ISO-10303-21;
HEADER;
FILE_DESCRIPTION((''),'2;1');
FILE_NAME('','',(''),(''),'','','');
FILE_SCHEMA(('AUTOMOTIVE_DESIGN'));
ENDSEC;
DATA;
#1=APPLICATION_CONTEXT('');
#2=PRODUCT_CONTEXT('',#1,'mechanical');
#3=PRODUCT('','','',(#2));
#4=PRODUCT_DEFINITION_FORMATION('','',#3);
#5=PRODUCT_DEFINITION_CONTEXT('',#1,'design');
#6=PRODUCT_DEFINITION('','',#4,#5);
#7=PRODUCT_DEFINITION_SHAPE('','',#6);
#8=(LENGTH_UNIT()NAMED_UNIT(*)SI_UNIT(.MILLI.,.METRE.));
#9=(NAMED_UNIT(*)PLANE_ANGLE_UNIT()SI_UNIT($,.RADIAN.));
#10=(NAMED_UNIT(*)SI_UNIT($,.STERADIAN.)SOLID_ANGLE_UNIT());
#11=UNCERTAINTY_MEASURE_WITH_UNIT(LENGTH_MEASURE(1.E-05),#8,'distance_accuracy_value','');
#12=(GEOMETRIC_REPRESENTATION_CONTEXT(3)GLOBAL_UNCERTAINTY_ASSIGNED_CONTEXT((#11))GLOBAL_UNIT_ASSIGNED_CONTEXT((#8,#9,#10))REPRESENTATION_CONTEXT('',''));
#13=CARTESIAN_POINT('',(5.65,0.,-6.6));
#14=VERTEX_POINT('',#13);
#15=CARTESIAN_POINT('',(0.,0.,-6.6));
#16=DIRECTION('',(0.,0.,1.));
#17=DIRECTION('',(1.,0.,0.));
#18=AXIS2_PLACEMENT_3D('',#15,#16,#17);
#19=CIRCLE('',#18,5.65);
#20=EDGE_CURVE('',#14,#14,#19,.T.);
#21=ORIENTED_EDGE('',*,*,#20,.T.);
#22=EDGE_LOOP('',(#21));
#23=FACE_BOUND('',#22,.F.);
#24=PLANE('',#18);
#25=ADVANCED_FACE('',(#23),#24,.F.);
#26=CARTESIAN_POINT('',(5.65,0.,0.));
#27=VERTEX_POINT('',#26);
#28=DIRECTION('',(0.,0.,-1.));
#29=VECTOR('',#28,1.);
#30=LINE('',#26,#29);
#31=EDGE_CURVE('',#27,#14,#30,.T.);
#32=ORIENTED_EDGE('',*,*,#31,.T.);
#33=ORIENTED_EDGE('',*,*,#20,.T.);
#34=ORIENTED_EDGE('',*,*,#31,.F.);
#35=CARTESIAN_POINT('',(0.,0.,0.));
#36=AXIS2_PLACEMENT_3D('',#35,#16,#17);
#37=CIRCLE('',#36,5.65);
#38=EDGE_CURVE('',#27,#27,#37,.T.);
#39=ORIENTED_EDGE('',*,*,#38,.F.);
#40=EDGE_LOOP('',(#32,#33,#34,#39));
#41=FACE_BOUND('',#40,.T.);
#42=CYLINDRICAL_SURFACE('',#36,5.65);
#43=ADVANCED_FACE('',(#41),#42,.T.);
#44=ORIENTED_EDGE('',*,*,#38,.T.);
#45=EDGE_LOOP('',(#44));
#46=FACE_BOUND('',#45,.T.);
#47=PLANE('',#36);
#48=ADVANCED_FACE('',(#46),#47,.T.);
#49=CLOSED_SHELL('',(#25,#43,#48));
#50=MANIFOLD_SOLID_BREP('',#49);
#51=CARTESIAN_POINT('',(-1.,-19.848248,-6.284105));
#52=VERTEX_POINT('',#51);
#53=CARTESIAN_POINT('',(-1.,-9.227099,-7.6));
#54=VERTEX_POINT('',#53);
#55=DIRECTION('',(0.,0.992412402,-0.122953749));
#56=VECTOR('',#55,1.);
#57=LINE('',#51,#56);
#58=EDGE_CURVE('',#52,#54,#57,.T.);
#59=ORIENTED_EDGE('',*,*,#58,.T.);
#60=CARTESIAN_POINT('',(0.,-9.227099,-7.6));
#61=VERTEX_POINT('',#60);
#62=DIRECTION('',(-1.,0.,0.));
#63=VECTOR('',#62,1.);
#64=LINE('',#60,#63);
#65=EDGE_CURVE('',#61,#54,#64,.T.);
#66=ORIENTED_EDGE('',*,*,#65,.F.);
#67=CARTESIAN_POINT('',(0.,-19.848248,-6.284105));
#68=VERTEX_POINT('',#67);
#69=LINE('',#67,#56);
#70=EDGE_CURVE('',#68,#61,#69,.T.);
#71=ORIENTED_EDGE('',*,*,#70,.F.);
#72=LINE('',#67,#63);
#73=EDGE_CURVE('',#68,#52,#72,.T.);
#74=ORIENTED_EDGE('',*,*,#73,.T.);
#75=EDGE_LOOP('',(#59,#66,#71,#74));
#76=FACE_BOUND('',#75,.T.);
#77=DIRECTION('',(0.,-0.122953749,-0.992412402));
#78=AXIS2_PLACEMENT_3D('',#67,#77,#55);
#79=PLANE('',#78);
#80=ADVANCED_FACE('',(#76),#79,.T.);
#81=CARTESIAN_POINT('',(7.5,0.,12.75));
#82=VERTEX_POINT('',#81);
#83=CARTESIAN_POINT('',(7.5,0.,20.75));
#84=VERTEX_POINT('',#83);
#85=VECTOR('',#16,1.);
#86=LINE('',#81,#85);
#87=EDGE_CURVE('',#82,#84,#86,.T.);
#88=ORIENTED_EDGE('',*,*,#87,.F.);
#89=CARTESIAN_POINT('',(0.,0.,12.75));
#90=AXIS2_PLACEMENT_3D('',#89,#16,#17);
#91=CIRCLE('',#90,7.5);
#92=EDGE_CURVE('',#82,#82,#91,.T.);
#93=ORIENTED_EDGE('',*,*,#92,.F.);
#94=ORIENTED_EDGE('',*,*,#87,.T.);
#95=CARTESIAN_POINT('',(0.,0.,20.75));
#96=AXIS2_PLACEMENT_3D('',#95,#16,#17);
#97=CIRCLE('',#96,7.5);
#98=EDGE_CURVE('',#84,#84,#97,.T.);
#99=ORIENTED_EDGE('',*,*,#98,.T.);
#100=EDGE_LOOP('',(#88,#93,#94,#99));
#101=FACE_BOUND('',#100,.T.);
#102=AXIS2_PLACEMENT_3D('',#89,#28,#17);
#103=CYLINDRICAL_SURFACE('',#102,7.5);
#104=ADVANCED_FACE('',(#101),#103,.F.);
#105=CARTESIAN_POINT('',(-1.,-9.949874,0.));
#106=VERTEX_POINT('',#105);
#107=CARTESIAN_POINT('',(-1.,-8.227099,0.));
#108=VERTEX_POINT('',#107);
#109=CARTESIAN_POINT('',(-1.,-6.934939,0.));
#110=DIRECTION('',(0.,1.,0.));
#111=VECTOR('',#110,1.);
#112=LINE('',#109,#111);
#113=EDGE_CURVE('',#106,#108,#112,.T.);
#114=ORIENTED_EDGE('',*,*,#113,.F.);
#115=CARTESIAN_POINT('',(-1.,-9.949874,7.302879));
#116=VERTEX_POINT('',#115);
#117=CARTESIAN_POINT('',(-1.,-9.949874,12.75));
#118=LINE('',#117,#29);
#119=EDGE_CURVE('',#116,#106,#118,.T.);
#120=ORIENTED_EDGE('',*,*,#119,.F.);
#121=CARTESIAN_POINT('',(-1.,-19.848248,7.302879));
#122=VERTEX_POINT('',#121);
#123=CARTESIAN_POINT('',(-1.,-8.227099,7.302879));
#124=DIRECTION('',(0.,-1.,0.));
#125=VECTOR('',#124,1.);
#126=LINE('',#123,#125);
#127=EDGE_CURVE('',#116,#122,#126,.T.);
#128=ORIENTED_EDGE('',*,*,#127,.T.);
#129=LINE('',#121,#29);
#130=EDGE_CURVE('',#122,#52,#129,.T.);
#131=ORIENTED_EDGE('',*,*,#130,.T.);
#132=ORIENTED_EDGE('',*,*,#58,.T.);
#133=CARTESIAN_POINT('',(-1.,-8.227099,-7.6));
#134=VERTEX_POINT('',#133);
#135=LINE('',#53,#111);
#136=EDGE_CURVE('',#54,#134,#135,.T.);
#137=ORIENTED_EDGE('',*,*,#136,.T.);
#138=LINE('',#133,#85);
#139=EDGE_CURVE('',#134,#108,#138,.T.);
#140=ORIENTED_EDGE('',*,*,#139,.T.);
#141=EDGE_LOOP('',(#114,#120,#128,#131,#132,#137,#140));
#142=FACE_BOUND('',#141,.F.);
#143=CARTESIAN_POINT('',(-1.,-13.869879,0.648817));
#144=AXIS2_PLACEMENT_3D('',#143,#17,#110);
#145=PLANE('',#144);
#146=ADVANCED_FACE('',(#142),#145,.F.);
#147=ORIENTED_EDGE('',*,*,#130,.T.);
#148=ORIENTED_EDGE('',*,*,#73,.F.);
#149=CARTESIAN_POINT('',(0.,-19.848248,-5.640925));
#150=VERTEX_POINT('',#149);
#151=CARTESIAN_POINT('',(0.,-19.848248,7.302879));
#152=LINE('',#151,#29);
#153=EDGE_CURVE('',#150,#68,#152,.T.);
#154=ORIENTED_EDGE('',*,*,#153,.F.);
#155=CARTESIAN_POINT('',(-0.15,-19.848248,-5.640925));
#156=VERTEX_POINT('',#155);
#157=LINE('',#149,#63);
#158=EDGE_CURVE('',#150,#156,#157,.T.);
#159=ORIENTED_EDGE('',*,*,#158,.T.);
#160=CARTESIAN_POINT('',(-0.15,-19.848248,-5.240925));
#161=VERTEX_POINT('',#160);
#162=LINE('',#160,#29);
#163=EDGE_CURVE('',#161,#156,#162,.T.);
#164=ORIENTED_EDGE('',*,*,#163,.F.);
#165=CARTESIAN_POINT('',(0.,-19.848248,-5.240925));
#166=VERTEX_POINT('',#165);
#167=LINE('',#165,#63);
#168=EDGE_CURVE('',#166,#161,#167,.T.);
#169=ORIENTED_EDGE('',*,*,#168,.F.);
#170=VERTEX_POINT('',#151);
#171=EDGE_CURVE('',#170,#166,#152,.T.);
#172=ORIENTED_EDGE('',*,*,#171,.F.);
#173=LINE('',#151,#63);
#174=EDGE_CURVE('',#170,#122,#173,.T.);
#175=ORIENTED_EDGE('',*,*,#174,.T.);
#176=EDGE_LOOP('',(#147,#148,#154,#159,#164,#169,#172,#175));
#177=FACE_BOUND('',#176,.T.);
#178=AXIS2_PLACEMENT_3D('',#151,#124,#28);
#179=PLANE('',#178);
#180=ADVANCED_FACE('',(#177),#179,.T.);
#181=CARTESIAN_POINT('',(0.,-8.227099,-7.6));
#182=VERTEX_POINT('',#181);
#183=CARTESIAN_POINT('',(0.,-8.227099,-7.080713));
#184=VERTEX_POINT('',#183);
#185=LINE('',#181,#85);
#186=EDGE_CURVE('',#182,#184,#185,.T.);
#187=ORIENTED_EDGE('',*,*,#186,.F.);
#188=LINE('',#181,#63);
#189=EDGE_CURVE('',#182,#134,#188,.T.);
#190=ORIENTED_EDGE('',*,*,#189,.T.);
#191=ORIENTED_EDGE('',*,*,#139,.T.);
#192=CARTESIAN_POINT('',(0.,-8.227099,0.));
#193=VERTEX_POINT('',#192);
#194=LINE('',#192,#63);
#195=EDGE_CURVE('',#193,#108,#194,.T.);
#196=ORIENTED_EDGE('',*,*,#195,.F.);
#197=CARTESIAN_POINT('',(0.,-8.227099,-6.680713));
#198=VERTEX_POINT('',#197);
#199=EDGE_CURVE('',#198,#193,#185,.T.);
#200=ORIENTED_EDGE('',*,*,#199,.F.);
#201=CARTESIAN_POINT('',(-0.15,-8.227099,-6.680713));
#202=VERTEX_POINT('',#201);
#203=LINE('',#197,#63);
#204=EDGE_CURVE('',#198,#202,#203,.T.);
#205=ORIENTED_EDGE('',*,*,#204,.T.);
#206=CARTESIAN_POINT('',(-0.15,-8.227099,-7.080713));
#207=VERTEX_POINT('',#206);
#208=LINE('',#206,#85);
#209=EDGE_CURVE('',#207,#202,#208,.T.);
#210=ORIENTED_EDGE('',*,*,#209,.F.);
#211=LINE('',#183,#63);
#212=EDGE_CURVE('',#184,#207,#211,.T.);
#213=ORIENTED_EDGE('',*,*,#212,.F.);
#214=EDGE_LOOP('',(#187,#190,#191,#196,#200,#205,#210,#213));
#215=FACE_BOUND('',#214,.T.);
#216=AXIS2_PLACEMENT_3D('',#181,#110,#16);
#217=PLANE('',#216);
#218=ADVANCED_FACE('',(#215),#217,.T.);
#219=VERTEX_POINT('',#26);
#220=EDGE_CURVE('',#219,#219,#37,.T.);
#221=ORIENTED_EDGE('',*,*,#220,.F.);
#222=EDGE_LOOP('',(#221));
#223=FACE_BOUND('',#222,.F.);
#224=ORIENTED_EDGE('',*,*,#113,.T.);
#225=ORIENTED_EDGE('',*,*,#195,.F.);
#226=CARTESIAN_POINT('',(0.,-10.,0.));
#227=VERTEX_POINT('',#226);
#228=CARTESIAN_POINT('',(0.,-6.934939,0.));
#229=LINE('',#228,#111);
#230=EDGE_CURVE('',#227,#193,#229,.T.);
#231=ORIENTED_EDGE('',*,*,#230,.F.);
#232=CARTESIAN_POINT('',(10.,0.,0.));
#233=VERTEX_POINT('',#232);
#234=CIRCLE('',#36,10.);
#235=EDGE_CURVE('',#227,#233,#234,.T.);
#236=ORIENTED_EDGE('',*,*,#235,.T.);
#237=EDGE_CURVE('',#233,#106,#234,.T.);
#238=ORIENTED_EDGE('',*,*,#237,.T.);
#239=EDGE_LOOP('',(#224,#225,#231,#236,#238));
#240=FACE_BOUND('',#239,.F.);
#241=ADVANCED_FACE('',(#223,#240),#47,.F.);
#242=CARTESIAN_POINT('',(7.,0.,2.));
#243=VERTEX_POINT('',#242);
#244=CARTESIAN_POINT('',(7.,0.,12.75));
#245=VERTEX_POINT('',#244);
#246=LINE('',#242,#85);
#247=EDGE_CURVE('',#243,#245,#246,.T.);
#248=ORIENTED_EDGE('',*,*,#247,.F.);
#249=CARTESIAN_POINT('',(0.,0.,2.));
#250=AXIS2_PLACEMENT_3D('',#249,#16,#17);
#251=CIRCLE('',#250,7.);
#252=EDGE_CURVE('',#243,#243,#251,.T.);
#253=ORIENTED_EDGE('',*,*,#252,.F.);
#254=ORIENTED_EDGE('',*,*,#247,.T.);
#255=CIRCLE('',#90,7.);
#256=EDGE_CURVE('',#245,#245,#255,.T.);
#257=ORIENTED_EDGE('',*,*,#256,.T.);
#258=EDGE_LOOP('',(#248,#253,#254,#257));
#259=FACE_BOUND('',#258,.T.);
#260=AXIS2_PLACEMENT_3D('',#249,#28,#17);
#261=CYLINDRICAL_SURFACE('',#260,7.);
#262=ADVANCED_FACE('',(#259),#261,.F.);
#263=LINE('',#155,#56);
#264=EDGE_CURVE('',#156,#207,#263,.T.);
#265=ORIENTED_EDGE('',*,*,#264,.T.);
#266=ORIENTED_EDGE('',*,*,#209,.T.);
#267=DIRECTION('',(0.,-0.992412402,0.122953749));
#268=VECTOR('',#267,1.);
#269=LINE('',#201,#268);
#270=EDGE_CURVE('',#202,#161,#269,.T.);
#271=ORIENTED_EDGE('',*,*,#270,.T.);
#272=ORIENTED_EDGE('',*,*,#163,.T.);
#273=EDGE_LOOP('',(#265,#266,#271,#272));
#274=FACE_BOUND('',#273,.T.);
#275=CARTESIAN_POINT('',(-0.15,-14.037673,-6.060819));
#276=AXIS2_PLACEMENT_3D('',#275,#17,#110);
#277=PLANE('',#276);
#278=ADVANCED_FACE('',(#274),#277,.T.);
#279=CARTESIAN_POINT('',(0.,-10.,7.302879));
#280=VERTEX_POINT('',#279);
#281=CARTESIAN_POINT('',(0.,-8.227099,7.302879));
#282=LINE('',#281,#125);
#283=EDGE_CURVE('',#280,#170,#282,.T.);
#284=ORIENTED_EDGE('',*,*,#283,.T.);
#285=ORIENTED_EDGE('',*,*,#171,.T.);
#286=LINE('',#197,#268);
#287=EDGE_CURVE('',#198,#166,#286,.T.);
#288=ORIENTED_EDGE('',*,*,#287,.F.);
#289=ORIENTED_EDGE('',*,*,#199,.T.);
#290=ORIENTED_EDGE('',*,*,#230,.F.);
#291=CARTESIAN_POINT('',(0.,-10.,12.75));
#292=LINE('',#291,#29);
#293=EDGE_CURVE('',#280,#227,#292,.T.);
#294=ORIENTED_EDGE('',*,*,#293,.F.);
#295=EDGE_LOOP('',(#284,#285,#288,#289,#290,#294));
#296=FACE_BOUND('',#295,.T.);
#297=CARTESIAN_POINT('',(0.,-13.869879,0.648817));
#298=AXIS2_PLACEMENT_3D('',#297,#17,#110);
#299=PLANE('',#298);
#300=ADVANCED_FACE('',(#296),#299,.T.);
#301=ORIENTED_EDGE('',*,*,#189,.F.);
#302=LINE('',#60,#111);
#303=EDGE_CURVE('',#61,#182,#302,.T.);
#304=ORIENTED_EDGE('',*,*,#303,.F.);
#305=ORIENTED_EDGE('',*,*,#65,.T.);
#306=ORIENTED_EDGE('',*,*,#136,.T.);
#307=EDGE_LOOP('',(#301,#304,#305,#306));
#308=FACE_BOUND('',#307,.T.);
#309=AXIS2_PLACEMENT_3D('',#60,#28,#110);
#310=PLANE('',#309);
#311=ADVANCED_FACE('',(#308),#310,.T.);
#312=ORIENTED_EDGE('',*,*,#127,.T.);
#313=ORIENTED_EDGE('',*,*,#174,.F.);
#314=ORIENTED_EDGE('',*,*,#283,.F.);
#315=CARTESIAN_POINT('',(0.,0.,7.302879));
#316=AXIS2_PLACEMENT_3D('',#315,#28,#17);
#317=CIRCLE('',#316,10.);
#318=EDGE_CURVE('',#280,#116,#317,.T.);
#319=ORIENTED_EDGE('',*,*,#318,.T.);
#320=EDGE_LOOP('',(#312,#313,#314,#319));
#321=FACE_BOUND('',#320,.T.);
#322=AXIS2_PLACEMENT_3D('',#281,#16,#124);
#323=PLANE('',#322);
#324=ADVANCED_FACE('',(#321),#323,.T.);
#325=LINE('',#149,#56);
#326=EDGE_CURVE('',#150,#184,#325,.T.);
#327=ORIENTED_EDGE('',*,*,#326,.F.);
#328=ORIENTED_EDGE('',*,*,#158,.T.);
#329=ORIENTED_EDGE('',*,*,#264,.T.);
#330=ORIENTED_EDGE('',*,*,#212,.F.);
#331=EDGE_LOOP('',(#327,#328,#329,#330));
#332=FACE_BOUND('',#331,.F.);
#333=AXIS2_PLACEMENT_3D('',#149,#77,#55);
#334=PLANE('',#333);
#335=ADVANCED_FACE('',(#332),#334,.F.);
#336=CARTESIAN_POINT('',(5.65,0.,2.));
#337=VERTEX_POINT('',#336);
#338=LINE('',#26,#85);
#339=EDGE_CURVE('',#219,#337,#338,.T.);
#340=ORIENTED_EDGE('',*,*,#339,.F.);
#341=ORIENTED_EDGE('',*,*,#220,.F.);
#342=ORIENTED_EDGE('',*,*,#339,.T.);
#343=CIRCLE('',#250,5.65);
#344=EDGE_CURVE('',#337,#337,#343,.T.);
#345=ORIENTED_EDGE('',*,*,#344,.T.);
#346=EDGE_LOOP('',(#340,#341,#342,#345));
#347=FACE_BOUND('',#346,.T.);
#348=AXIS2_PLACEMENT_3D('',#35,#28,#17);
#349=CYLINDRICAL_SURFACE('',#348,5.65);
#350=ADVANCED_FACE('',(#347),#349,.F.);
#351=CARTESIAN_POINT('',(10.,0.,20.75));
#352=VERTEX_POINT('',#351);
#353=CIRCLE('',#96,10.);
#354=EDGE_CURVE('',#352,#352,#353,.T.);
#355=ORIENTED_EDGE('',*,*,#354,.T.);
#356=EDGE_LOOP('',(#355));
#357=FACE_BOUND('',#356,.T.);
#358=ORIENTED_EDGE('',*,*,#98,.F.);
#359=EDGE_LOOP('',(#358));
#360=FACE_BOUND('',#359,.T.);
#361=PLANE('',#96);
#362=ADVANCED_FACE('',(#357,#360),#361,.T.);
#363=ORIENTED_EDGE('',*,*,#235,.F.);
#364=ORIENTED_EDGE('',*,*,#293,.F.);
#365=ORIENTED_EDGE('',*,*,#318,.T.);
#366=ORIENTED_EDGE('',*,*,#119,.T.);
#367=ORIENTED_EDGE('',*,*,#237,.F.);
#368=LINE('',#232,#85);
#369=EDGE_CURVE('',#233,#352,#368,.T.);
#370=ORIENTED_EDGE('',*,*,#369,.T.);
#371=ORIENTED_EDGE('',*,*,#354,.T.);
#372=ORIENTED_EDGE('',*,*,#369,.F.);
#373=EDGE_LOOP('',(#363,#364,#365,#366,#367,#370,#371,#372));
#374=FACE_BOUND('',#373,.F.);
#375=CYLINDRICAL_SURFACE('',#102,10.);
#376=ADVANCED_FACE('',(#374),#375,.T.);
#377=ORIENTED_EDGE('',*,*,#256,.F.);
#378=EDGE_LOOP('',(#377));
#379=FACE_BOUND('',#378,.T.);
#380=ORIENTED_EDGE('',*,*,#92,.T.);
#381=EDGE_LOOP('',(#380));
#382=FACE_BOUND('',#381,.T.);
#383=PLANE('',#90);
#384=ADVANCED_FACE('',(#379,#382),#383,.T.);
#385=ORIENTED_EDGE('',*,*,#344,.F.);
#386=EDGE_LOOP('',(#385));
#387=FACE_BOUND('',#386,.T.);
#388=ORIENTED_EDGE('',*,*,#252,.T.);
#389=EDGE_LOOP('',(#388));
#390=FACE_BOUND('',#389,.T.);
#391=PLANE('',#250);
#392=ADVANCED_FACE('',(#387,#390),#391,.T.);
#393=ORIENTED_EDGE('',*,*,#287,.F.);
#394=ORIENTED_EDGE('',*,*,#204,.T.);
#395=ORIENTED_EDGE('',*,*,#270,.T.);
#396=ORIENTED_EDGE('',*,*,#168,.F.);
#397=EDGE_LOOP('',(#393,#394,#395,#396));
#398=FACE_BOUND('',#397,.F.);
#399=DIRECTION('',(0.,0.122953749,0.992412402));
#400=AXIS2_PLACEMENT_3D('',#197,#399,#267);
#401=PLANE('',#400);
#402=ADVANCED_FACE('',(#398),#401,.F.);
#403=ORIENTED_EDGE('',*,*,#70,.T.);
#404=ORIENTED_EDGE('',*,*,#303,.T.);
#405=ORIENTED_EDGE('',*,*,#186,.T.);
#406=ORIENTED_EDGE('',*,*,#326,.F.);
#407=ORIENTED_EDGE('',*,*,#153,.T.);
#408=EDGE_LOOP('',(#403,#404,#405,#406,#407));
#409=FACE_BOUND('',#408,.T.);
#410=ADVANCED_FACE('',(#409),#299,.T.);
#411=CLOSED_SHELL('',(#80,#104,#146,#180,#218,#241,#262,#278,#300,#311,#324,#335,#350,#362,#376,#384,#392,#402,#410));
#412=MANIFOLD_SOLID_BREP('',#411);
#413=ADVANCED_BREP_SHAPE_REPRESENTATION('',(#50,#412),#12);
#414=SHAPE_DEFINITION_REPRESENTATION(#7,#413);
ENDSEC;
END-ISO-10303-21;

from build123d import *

# Parameters (mm, degrees)
F0_R     = 10
F0_R_2   = 5.65
F1_DEPTH = 2
F2_R     = 10
F2_R_2   = 7
F3_DEPTH = 10.75
F4_R     = 10
F4_R_2   = 7.5
F5_DEPTH = 8
F6_DEPTH = 6.6
F8_DEPTH = 1
F9_DEPTH = 0.15


# Not quite as in the source:
# - a feature names something its author has since deleted; it is built from what else it names


with BuildPart() as f1:
    # F0 (on Top) → F1 (new body)
    with BuildSketch(Plane.XY):
        Circle(F0_R)
        Circle(F0_R_2, mode=Mode.SUBTRACT)
    extrude(amount=F1_DEPTH)

    # F2 (on face) → F3 (join)
    with BuildSketch(Plane.XY.offset(2)):
        Circle(F2_R)
        Circle(F2_R_2, mode=Mode.SUBTRACT)
    extrude(amount=F3_DEPTH)

    # F4 (on face) → F5 (join)
    with BuildSketch(Plane.XY.offset(12.75)):
        Circle(F4_R)
        Circle(F4_R_2, mode=Mode.SUBTRACT)
    extrude(amount=F5_DEPTH)

    # F7 (on Right) → F8 (join)
    with BuildSketch(Plane.YZ):
        Polygon((-19.8482480398, -5.2409250216), (-8.2270988125, -6.6807134215), (-8.2270988125, 1.9598644681), (-8.2270988125, 7.3028788902), (-19.8482480398, 7.3028788902), align=None)
        Polygon((-9.2270988125, -7.6), (-8.2270988125, -7.6), (-8.2270988125, -7.0807134215), (-19.8482480398, -5.6409250216), (-19.8482480398, -6.2841054055), align=None)
        Polygon((-19.8482480398, -5.4409250216), (-8.2270988125, -6.8807134215), (-8.2270988125, -6.6807134215), (-19.8482480398, -5.2409250216), align=None)
        Polygon((-19.8482480398, -5.6409250216), (-8.2270988125, -7.0807134215), (-8.2270988125, -6.8807134215), (-19.8482480398, -5.4409250216), align=None)
    extrude(amount=-F8_DEPTH)

    # F7 (on Right) → F9 (cut)
    with BuildSketch(Plane.YZ):
        Polygon((-19.8482480398, -5.4409250216), (-8.2270988125, -6.8807134215), (-8.2270988125, -6.6807134215), (-19.8482480398, -5.2409250216), align=None)
        Polygon((-19.8482480398, -5.6409250216), (-8.2270988125, -7.0807134215), (-8.2270988125, -6.8807134215), (-19.8482480398, -5.4409250216), align=None)
    extrude(amount=-F9_DEPTH, mode=Mode.SUBTRACT)


with BuildPart() as f6:
    # F0 (on Top) → F6 (new body)
    with BuildSketch(Plane.XY):
        Circle(F0_R_2)
    extrude(amount=-F6_DEPTH)


solid = Compound([f1.part, f6.part])
